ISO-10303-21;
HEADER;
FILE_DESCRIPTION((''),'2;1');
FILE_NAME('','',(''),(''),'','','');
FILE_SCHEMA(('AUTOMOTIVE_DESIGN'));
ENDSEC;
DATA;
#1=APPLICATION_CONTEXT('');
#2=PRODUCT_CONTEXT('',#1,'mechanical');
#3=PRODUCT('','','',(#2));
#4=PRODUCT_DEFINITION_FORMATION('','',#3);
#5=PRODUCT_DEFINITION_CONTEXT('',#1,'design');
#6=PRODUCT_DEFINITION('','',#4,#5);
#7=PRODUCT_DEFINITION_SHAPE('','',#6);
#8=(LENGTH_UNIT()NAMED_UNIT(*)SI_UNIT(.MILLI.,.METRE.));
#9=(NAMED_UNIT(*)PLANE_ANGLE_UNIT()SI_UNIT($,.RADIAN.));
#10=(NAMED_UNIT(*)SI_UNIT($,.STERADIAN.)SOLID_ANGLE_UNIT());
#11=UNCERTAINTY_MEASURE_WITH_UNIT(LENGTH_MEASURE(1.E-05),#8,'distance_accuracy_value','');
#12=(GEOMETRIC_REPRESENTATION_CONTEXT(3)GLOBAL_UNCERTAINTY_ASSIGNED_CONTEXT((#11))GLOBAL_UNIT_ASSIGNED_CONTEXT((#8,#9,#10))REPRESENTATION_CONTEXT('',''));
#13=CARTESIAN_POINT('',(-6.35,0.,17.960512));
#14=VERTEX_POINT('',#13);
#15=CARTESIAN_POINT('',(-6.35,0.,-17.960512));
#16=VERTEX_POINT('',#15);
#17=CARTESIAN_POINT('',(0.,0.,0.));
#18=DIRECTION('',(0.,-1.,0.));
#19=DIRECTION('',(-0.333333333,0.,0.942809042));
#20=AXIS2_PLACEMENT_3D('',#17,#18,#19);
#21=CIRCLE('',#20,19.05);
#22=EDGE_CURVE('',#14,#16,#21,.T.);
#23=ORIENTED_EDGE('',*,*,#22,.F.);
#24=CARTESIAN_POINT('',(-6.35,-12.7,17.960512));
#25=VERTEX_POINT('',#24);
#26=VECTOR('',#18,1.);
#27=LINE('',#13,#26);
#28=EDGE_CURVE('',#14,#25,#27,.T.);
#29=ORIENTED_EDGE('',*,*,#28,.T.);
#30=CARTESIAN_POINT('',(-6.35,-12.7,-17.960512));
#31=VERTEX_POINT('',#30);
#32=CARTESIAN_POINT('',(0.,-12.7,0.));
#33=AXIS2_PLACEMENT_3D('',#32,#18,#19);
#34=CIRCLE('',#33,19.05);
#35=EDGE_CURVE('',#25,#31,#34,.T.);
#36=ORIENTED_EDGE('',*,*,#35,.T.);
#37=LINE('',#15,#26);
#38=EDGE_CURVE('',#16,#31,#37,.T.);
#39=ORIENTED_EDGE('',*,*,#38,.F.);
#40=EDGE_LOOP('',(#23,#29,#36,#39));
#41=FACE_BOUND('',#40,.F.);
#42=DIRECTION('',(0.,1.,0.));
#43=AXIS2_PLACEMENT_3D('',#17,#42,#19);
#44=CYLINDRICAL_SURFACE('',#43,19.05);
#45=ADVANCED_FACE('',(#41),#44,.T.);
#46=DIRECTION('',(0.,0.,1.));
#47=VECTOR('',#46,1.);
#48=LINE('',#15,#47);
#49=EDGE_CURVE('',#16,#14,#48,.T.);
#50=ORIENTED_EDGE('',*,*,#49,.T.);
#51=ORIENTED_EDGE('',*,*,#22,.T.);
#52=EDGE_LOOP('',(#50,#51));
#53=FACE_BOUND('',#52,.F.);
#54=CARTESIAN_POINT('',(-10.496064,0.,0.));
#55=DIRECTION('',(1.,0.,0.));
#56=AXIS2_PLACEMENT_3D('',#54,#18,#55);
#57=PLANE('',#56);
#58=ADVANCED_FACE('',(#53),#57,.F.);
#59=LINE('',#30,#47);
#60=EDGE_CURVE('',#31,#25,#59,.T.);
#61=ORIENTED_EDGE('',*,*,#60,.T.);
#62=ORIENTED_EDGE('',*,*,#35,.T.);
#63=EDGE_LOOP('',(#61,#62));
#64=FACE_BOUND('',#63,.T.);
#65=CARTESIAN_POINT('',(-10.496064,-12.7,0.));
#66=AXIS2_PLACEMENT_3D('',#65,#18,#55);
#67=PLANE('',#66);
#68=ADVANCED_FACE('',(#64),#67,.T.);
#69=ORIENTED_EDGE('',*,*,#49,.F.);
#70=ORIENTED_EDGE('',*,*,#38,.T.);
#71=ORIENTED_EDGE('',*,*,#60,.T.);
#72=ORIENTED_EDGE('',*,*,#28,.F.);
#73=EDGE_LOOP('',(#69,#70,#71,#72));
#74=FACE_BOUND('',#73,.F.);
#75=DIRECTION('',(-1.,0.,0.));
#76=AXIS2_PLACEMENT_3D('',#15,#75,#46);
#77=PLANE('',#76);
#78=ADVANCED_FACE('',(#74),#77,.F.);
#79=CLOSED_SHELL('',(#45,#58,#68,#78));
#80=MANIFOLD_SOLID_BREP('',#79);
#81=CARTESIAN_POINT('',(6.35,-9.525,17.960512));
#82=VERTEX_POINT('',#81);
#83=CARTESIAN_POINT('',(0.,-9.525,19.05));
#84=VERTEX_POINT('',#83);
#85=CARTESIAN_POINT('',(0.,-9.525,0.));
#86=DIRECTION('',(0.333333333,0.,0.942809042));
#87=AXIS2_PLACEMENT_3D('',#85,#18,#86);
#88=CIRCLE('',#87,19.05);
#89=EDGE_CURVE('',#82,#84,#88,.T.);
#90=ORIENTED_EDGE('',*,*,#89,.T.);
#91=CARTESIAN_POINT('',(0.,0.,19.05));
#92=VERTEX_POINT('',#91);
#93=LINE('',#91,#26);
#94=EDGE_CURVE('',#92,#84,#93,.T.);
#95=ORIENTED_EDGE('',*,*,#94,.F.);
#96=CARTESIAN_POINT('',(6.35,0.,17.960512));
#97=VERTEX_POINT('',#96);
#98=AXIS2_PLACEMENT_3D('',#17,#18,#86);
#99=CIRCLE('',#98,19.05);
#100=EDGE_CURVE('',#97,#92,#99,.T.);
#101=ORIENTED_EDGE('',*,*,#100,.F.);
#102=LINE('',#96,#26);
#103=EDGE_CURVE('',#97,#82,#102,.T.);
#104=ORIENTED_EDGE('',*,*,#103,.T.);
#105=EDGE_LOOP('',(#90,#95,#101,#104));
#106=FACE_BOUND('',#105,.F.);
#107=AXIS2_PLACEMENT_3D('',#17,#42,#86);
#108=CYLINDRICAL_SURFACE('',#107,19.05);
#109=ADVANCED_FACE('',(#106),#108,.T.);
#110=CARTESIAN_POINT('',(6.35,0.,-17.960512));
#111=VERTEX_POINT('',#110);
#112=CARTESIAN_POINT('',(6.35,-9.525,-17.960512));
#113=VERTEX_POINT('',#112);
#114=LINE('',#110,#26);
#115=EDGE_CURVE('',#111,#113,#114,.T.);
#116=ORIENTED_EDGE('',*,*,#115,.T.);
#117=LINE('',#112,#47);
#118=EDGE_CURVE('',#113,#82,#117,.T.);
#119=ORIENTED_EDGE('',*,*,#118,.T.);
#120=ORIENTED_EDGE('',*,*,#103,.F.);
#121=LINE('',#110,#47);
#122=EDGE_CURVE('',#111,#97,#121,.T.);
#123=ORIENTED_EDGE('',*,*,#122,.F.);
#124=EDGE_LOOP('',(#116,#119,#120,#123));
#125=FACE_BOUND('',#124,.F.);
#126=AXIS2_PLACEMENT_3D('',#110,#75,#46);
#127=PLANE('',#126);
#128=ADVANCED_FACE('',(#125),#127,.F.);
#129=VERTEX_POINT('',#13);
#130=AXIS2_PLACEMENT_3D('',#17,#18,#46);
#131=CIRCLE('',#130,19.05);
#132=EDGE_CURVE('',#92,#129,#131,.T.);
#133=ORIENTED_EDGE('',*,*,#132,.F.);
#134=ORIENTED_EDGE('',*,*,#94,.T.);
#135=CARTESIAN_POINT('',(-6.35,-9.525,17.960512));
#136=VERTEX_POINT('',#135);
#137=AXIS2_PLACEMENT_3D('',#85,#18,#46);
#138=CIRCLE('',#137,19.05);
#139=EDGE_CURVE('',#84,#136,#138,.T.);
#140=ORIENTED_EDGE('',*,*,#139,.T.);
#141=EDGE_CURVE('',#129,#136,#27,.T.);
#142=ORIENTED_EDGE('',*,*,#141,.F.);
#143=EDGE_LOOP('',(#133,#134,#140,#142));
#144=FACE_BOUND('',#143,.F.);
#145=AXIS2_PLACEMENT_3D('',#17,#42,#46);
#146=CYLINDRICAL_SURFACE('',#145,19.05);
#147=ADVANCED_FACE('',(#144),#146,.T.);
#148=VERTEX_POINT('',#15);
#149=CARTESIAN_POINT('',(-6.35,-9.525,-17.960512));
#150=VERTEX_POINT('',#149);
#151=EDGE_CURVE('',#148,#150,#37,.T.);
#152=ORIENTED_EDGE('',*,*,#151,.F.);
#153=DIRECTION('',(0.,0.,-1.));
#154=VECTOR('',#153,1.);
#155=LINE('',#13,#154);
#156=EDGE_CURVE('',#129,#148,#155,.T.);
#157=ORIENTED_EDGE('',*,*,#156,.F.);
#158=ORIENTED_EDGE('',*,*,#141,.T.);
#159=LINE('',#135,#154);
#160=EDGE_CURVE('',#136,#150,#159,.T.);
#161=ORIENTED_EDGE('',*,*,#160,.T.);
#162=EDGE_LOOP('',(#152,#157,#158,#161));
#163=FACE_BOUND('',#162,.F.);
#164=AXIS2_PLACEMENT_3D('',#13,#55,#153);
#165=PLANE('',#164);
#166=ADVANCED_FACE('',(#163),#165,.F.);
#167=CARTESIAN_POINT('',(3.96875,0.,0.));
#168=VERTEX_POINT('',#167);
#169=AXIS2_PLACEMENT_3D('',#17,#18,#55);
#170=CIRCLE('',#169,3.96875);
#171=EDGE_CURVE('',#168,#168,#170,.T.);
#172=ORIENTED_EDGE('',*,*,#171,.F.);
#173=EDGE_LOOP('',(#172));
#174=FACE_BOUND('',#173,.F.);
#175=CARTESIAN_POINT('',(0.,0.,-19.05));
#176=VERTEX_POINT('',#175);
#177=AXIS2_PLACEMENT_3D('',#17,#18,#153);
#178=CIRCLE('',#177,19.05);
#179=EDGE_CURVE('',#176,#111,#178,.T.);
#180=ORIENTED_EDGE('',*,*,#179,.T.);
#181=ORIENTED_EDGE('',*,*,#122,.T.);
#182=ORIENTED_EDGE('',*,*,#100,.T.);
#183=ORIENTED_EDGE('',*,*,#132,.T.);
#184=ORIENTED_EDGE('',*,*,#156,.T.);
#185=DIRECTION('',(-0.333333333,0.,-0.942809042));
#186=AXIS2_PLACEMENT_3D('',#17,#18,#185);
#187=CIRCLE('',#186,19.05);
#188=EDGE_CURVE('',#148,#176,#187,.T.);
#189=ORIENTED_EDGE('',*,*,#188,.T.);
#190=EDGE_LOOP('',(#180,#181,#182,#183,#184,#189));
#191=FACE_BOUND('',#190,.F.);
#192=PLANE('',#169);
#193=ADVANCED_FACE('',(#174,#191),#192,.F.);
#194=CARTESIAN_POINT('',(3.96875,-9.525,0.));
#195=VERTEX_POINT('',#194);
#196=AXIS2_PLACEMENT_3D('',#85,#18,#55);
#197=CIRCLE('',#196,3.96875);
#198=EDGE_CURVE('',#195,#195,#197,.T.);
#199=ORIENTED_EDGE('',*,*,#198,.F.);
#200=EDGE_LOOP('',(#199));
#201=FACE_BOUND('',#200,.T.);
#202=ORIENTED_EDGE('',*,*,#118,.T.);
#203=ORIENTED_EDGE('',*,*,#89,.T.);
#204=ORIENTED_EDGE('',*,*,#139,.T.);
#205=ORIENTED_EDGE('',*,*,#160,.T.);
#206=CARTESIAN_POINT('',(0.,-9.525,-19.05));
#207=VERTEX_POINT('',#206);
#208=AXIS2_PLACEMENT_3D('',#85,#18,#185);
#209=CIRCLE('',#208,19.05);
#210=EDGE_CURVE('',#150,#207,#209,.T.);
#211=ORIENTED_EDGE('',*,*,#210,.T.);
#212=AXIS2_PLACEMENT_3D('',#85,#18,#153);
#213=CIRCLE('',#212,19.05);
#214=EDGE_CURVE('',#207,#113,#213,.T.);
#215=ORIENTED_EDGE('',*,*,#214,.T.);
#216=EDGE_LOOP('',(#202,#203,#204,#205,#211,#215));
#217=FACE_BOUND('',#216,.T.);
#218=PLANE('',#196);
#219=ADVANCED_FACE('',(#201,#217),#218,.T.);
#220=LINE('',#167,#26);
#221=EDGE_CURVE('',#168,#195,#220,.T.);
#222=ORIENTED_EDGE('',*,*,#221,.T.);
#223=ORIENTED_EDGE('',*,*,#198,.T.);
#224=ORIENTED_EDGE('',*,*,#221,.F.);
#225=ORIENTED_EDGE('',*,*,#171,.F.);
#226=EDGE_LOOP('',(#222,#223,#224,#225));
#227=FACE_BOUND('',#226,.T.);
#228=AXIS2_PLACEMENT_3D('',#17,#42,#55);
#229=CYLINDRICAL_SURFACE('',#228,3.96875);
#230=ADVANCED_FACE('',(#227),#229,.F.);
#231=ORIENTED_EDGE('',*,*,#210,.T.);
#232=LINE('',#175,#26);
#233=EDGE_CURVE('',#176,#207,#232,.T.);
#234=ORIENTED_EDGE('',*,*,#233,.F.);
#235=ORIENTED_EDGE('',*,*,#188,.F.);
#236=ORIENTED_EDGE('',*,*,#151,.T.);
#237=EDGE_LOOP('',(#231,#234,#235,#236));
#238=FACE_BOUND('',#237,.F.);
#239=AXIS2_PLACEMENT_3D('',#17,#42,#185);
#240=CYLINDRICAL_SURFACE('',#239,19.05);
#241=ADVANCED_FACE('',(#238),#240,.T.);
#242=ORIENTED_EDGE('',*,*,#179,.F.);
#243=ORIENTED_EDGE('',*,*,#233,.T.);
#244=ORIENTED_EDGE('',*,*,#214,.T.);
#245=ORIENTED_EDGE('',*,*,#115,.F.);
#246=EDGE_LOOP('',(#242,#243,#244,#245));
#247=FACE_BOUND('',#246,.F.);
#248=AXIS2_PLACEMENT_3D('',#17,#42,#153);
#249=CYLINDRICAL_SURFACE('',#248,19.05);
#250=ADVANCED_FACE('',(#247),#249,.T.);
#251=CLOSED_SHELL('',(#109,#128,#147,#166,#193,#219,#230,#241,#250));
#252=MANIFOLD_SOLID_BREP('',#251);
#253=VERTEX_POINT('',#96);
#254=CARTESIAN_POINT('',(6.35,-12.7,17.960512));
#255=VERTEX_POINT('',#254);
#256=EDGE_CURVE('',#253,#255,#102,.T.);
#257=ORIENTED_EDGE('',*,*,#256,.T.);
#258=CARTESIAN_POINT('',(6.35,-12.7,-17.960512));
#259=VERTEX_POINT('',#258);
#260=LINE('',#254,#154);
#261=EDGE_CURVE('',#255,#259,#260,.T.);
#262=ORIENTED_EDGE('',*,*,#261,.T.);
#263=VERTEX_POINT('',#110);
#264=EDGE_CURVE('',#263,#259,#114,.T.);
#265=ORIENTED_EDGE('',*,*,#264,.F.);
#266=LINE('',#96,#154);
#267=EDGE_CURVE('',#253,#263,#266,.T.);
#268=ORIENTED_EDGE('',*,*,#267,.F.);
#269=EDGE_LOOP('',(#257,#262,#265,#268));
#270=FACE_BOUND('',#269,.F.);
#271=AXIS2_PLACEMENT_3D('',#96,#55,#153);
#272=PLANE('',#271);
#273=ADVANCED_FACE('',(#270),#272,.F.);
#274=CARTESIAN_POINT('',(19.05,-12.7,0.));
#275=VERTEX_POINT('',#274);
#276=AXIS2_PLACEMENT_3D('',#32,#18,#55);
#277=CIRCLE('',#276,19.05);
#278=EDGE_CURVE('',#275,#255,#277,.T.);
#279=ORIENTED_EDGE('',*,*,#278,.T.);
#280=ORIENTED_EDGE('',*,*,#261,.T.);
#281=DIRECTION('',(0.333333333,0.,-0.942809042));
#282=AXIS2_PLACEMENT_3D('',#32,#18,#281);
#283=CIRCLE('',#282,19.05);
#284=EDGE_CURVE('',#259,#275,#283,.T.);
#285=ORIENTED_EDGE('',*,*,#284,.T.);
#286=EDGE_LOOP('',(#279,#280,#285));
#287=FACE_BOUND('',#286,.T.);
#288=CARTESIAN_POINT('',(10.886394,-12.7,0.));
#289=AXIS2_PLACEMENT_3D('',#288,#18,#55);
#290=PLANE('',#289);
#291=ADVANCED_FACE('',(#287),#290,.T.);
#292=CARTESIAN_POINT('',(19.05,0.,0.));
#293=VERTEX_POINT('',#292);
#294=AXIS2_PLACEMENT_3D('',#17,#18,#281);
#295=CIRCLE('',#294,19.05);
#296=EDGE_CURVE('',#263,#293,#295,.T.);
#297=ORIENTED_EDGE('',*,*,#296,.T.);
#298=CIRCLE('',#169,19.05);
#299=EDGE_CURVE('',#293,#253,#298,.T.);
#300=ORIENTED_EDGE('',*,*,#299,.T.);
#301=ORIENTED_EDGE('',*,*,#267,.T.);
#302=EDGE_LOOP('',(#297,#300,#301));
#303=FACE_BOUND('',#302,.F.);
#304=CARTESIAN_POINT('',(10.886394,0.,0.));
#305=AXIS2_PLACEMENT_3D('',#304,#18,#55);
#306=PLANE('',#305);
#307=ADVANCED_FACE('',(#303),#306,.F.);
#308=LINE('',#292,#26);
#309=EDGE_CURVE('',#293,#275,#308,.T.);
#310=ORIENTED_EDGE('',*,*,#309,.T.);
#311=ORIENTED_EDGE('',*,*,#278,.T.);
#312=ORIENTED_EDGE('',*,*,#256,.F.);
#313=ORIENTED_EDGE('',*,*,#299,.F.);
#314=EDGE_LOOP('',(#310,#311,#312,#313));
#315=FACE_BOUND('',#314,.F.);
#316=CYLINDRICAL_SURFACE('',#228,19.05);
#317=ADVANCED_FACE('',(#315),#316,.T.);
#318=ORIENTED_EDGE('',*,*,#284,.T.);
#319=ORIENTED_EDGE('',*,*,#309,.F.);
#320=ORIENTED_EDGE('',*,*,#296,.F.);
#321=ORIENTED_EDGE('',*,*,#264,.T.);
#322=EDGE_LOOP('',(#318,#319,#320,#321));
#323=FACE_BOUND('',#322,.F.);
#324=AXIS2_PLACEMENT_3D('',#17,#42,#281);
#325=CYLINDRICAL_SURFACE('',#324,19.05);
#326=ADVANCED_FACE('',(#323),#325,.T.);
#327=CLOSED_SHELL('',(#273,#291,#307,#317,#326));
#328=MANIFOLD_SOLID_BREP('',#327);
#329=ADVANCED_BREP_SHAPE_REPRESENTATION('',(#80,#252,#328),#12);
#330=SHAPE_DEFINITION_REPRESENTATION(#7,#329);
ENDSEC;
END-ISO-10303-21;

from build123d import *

# Parameters (mm, degrees)
F1_DEPTH = 12.7
F0_R     = 3.96875
F2_DEPTH = 9.525
F3_DEPTH = 62


# Not quite as in the source:
# - an extrude ends at something that could not be found from the text; its depth is read off the source's solid


with BuildPart() as f1:
    # F0 (on Front) → F1 (new body)
    with BuildSketch(Plane.XZ):
        with BuildLine():
            ThreePointArc((6.35, -17.9605122421), (15.5542598667, -10.9985226281), (19.05, 0))
            ThreePointArc((19.05, 0), (15.5542598667, 10.9985226281), (6.35, 17.9605122421))
            Line((6.35, 17.9605122421), (6.35, -17.9605122421))
        make_face()
    extrude(amount=F1_DEPTH)

    # F0 (on Front) → F3 (cut, through all)
    with BuildSketch(Plane.XZ):
        Circle(F0_R)
    extrude(amount=-F3_DEPTH, mode=Mode.SUBTRACT)


with BuildPart() as f1b:
    # F0 (on Front) → F1, piece 2 (new body)
    with BuildSketch(Plane.XZ):
        with BuildLine():
            Line((-6.35, -17.9605122421), (-6.35, 17.9605122421))
            ThreePointArc((-6.35, 17.9605122421), (-19.05, 0), (-6.35, -17.9605122421))
        make_face()
    extrude(amount=F1_DEPTH)


with BuildPart() as f2:
    # F0 (on Front) → F2 (new body)
    with BuildSketch(Plane.XZ):
        with BuildLine():
            Line((6.35, -17.9605122421), (6.35, 17.9605122421))
            ThreePointArc((6.35, 17.9605122421), (3.2213926947, 18.7756525614), (0, 19.05))
            ThreePointArc((0, 19.05), (-3.2213926947, 18.7756525614), (-6.35, 17.9605122421))
            Line((-6.35, 17.9605122421), (-6.35, -17.9605122421))
            ThreePointArc((-6.35, -17.9605122421), (-3.2213926947, -18.7756525614), (0, -19.05))
            ThreePointArc((0, -19.05), (3.2213926947, -18.7756525614), (6.35, -17.9605122421))
        make_face()
        Circle(F0_R, mode=Mode.SUBTRACT)
    extrude(amount=F2_DEPTH)


solid = Compound([f1.part, f1b.part, f2.part])
